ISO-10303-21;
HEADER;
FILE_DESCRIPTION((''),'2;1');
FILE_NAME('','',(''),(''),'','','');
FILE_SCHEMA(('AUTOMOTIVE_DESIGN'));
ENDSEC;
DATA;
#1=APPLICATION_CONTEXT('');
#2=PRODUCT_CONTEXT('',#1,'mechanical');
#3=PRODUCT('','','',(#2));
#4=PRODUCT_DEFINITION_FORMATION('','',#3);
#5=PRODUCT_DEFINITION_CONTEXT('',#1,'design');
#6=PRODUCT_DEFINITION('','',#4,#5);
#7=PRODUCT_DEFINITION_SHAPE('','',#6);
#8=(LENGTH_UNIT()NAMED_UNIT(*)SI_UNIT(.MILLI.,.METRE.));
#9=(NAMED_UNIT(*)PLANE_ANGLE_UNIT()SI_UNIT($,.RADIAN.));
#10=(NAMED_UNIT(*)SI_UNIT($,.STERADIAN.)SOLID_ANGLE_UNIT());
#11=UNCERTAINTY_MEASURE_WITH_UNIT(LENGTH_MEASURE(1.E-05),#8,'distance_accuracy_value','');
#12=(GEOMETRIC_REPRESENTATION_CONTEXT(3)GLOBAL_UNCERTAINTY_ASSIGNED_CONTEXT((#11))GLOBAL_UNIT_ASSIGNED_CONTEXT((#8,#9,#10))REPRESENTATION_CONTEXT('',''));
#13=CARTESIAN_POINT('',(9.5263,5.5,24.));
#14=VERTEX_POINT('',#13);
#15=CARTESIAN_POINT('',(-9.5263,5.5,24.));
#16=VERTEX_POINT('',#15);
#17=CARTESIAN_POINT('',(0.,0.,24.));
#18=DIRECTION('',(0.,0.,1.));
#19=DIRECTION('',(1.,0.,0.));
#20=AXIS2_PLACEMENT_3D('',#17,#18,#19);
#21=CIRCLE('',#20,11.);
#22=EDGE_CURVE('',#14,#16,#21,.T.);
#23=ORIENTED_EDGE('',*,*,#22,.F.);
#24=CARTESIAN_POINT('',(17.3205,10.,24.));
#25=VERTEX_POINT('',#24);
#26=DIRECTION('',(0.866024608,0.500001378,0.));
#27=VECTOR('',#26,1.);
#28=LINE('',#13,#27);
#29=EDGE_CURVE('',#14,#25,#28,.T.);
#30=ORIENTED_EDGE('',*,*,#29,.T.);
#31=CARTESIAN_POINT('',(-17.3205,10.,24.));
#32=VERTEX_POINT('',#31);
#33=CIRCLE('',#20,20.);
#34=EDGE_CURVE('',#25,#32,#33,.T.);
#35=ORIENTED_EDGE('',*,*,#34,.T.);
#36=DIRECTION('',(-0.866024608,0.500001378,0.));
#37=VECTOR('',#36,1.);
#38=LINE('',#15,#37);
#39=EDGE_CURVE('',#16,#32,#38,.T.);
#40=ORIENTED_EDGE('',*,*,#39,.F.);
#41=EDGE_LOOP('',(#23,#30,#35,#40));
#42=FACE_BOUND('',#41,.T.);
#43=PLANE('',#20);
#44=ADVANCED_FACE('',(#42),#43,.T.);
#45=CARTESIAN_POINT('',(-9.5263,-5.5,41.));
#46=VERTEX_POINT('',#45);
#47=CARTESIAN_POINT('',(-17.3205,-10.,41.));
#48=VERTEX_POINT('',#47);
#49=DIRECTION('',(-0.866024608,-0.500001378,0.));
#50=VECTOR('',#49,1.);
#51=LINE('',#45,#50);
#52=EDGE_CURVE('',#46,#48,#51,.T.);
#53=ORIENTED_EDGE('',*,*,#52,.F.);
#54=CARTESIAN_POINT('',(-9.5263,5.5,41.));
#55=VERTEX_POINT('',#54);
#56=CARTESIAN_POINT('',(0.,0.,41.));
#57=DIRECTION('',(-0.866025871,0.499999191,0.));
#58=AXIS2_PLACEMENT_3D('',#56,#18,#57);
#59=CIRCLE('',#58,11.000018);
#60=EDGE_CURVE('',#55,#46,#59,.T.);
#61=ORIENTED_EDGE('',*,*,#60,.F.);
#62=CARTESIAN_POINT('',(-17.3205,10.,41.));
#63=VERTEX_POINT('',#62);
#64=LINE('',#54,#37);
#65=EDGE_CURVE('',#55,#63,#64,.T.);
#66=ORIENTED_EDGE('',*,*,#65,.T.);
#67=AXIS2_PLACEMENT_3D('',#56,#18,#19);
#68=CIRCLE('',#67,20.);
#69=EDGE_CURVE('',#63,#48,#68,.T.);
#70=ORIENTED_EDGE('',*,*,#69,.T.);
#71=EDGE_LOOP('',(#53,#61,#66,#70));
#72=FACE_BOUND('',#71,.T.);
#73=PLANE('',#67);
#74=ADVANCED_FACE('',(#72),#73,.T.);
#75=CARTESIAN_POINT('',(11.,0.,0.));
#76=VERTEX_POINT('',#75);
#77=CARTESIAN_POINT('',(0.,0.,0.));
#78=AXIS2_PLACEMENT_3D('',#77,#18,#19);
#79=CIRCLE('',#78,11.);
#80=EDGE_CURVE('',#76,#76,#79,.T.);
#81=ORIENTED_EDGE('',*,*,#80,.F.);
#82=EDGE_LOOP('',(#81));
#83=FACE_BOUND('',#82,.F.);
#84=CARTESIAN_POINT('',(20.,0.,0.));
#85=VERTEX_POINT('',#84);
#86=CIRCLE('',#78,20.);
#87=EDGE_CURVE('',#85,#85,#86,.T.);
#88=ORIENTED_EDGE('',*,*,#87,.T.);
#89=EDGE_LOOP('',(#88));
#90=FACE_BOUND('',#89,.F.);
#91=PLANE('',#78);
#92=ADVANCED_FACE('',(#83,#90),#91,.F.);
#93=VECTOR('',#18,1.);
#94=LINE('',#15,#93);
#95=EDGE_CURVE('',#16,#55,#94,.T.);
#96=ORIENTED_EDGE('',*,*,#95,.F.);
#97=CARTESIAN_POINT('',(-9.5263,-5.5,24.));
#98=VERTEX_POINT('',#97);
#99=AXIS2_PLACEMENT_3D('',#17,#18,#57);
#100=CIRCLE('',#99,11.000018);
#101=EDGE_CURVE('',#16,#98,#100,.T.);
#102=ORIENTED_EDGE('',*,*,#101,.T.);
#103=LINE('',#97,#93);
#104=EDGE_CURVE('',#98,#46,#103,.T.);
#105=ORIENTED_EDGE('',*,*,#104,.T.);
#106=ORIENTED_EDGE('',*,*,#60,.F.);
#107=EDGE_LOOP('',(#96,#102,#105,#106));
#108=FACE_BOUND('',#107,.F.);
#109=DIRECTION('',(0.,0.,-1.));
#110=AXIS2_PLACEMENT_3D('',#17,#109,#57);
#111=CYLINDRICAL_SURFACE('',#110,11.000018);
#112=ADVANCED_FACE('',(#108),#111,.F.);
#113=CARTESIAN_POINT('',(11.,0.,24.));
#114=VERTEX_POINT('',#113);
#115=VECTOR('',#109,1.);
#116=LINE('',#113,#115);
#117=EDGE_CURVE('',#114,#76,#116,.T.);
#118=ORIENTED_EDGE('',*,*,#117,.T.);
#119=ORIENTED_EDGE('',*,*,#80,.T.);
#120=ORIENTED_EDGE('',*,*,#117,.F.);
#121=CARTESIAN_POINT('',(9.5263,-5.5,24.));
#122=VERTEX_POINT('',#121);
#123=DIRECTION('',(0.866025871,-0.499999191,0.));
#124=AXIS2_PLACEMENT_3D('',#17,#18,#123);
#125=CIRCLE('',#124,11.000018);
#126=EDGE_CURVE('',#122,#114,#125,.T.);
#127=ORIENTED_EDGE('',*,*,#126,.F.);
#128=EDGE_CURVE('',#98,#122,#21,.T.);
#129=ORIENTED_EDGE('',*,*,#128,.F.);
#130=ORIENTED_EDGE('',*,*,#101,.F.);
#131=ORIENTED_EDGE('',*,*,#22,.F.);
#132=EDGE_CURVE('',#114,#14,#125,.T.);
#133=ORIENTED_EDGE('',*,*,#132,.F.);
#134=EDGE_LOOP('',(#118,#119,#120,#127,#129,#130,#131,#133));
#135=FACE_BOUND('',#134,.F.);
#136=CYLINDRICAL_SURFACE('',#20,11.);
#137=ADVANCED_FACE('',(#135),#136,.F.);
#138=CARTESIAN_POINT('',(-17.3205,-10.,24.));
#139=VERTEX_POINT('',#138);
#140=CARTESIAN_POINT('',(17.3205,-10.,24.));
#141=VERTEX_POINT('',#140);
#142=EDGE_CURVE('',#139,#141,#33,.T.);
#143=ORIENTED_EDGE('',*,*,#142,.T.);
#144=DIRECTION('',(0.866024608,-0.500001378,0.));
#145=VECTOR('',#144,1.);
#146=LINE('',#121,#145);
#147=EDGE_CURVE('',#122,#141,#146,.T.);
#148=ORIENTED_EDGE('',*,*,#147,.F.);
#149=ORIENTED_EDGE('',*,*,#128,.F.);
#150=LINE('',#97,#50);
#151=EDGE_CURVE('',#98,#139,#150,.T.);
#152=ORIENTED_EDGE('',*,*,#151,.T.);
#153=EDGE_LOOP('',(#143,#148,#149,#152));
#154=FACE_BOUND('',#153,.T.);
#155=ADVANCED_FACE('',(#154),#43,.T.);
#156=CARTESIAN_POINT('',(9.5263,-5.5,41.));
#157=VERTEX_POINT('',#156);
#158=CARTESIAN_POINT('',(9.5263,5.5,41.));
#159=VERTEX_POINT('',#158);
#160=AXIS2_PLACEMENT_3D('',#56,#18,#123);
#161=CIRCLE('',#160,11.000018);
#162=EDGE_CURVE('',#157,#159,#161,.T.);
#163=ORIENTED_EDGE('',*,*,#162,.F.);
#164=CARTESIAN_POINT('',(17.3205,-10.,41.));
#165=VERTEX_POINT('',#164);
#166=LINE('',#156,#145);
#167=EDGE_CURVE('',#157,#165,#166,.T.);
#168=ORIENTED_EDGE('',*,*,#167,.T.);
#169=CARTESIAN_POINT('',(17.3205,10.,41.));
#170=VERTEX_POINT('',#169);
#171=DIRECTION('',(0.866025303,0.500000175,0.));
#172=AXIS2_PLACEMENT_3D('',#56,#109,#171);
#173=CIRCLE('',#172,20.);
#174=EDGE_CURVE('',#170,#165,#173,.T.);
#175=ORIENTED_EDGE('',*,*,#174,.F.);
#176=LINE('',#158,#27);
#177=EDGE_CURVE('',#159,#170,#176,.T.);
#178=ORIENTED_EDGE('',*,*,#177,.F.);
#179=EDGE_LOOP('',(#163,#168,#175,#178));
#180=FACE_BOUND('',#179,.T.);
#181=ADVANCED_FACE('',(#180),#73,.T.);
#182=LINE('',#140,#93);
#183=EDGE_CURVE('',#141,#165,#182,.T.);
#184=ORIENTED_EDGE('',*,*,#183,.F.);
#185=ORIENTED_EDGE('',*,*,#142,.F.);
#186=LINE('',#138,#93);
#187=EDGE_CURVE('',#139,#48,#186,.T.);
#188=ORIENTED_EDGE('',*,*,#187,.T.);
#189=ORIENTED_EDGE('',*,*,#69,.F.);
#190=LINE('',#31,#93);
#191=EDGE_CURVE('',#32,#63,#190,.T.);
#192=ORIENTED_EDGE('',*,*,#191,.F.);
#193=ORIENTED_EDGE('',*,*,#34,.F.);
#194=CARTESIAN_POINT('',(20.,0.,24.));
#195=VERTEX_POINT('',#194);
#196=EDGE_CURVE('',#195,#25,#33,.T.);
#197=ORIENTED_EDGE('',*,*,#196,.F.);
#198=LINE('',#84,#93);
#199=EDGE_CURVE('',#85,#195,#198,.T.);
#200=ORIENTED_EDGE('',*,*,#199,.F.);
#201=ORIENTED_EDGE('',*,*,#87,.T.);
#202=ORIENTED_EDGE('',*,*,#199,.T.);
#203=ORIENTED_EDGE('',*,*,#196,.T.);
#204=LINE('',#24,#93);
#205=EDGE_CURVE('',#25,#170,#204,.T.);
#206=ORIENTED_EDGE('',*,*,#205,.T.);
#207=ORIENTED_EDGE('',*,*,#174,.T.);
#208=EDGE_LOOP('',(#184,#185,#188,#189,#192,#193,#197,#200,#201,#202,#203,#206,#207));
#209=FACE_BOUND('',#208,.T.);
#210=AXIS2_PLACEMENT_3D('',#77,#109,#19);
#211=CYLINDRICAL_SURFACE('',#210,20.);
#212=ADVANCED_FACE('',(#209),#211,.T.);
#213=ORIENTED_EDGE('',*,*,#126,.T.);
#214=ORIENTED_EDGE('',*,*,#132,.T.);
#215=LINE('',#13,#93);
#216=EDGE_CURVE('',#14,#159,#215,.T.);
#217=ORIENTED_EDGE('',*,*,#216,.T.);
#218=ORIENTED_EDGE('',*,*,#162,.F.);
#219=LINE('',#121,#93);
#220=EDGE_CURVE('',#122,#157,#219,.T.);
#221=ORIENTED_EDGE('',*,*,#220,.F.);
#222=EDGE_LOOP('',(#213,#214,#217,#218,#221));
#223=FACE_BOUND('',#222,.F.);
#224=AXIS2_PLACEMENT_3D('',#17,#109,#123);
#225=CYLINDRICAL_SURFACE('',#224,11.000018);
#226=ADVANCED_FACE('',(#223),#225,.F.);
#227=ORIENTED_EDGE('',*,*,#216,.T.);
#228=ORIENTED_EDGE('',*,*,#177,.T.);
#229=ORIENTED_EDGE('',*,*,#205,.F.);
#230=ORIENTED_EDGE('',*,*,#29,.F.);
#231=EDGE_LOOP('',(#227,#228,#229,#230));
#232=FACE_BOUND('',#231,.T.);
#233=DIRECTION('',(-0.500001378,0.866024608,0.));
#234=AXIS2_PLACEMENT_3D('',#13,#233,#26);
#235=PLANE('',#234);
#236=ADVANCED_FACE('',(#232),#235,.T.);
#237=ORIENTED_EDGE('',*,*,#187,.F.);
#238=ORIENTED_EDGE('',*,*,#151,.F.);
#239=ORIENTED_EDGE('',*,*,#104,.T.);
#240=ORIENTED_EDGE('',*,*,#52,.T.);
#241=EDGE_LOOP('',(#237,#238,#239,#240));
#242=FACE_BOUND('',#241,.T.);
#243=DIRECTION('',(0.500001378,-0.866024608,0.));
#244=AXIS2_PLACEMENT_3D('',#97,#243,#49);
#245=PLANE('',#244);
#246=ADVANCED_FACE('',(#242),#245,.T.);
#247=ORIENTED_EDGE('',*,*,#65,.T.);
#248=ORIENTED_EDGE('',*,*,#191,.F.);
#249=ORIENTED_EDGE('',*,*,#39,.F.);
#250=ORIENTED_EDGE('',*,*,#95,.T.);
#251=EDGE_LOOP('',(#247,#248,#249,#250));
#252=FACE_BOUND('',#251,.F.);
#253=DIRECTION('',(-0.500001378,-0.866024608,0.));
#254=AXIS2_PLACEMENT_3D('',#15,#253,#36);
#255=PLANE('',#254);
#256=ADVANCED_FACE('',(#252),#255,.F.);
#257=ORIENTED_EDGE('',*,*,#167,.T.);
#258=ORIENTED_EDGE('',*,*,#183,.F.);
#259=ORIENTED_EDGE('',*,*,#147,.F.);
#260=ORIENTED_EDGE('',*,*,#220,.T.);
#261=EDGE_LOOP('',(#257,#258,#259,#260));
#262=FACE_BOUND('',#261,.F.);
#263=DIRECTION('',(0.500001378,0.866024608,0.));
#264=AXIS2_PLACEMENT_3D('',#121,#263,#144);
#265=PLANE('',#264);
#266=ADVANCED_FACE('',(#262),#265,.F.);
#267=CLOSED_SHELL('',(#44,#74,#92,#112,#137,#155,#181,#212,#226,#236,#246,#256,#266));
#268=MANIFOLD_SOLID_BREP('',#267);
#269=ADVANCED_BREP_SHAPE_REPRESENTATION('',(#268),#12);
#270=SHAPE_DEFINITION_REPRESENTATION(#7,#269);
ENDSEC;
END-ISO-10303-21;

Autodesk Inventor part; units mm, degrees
ref_plane "YZ Plane" through (0, 0, 0) normal (1, 0, 0) x (0, 1, 0)
ref_plane "XZ Plane" through (0, 0, 0) normal (0, 1, 0) x (-1, 0, 0)
ref_plane "XY Plane" through (0, 0, 0) normal (0, 0, 1) x (1, 0, 0)
sketch "Sketch1" plane through (0, 0, 0) normal (0, 0, 1) x (1, 0, 0)
  circle A0 centre (0, 0) radius 20
  dimension "d0" = 40
extrude "Extrusion1" add sketch "Sketch1" along normal blind 24
sketch "Sketch2" plane through (0, 0, 24) normal (0, 0, 1) x (1, 0, 0)
  arc A0 (-9.5263, 5.5) -> (-9.5263, -5.5) centre (0, 0) ccw
  line L0 (-9.5263, 5.5) -> (-17.3205, 10)
  circle A1 centre (0, 0) radius 20 projected
  line L1 (0, 0) -> (20, 0) construction
  line L2 (-9.5263, -5.5) -> (-17.3205, -10)
  line L3 (0, 0) -> (20, 0) construction
  line L4 (0, 0) -> (0, 20) construction
  arc A2 (9.5263, -5.5) -> (9.5263, 5.5) centre (0, 0) ccw
  line L5 (9.5263, 5.5) -> (17.3205, 10)
  line L6 (9.5263, -5.5) -> (17.3205, -10)
  dimension "d3" = 22
  dimension "d4" = 150
  dimension "d5" = 150
extrude "Extrusion2" add sketch "Sketch2" along normal blind 17 contours A0 L2 A1 L0 | A1 L6 A2 L5
sketch "Sketch3" plane through (0, 0, 24) normal (0, 0, 1) x (1, 0, 0)
  circle A0 centre (0, 0) radius 11
  dimension "d8" = 22
extrude "Extrusion3" cut sketch "Sketch3" against normal through all
properties part number "22MM JAW"
